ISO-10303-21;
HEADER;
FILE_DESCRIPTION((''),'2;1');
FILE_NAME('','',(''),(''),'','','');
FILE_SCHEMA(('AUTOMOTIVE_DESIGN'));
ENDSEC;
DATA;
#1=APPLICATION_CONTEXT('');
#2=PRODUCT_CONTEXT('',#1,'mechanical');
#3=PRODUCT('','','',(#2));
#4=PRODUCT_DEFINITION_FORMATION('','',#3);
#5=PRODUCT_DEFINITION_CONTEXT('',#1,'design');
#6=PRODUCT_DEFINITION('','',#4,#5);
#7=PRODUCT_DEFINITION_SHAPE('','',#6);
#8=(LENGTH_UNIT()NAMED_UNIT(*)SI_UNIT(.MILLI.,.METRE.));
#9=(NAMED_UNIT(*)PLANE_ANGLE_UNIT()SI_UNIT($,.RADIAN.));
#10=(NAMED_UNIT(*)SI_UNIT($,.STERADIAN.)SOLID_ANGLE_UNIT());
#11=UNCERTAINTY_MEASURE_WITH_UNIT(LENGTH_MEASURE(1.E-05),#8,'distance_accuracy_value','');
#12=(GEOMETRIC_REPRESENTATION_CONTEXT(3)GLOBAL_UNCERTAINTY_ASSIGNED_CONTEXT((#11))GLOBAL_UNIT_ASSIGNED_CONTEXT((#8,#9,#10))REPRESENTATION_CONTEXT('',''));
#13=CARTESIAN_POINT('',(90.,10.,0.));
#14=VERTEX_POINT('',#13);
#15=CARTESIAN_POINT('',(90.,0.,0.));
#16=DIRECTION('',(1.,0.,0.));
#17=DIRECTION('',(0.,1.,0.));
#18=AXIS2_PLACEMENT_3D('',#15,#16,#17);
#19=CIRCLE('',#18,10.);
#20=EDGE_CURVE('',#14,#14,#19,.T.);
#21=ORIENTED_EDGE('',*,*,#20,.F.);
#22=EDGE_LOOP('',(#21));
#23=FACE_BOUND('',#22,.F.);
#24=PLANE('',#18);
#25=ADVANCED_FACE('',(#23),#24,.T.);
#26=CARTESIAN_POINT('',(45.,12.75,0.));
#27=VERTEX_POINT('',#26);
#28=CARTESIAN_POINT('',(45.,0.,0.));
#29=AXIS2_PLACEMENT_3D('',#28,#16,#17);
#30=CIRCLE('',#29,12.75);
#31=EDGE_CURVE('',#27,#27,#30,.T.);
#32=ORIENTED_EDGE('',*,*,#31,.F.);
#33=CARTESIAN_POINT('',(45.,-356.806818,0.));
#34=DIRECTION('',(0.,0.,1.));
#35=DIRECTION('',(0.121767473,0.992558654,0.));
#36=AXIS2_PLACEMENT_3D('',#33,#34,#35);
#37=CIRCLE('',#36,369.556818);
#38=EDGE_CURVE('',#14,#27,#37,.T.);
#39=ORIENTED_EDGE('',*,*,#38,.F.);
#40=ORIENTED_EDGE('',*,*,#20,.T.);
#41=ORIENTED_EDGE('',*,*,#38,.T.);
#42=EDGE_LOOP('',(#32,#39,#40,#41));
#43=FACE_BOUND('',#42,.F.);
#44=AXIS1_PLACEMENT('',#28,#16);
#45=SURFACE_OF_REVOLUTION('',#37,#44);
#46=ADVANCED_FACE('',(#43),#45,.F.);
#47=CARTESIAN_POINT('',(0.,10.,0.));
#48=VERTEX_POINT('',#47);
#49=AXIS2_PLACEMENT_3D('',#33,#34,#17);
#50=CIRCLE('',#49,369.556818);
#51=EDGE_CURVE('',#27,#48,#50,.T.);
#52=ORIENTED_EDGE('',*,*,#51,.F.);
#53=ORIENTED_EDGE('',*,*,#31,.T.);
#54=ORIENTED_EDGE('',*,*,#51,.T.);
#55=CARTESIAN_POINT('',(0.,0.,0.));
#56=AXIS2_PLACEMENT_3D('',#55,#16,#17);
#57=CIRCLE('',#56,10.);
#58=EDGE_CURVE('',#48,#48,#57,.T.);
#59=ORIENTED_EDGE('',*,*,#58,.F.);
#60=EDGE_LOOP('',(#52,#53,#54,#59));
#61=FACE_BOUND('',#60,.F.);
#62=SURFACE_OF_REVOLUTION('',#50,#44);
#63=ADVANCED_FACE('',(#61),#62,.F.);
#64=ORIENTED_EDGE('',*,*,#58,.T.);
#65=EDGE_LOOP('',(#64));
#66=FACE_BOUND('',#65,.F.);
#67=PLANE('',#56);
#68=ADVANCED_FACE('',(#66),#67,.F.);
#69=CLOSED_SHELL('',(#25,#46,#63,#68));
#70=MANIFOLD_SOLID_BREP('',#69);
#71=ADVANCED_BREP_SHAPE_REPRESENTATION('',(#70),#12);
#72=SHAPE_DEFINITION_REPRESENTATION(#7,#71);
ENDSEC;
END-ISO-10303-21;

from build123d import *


with BuildPart() as f1:
    # F0 (on Top) → F1 (revolve)
    with BuildSketch(Plane.XY):
        with BuildLine():
            Line((45, 12.75), (45, 0))
            Line((45, 0), (90, 0))
            Line((90, 0), (90, 10))
            ThreePointArc((90, 10), (67.541974736, 12.0618593169), (45, 12.75))
        make_face()
        with BuildLine():
            Line((0, 10), (0, 0))
            Line((0, 0), (45, 0))
            Line((45, 0), (45, 12.75))
            ThreePointArc((45, 12.75), (22.458025264, 12.0618593169), (0, 10))
        make_face()
    revolve(axis=Axis((45, 0, 0), (1, 0, 0)))


solid = f1.part
